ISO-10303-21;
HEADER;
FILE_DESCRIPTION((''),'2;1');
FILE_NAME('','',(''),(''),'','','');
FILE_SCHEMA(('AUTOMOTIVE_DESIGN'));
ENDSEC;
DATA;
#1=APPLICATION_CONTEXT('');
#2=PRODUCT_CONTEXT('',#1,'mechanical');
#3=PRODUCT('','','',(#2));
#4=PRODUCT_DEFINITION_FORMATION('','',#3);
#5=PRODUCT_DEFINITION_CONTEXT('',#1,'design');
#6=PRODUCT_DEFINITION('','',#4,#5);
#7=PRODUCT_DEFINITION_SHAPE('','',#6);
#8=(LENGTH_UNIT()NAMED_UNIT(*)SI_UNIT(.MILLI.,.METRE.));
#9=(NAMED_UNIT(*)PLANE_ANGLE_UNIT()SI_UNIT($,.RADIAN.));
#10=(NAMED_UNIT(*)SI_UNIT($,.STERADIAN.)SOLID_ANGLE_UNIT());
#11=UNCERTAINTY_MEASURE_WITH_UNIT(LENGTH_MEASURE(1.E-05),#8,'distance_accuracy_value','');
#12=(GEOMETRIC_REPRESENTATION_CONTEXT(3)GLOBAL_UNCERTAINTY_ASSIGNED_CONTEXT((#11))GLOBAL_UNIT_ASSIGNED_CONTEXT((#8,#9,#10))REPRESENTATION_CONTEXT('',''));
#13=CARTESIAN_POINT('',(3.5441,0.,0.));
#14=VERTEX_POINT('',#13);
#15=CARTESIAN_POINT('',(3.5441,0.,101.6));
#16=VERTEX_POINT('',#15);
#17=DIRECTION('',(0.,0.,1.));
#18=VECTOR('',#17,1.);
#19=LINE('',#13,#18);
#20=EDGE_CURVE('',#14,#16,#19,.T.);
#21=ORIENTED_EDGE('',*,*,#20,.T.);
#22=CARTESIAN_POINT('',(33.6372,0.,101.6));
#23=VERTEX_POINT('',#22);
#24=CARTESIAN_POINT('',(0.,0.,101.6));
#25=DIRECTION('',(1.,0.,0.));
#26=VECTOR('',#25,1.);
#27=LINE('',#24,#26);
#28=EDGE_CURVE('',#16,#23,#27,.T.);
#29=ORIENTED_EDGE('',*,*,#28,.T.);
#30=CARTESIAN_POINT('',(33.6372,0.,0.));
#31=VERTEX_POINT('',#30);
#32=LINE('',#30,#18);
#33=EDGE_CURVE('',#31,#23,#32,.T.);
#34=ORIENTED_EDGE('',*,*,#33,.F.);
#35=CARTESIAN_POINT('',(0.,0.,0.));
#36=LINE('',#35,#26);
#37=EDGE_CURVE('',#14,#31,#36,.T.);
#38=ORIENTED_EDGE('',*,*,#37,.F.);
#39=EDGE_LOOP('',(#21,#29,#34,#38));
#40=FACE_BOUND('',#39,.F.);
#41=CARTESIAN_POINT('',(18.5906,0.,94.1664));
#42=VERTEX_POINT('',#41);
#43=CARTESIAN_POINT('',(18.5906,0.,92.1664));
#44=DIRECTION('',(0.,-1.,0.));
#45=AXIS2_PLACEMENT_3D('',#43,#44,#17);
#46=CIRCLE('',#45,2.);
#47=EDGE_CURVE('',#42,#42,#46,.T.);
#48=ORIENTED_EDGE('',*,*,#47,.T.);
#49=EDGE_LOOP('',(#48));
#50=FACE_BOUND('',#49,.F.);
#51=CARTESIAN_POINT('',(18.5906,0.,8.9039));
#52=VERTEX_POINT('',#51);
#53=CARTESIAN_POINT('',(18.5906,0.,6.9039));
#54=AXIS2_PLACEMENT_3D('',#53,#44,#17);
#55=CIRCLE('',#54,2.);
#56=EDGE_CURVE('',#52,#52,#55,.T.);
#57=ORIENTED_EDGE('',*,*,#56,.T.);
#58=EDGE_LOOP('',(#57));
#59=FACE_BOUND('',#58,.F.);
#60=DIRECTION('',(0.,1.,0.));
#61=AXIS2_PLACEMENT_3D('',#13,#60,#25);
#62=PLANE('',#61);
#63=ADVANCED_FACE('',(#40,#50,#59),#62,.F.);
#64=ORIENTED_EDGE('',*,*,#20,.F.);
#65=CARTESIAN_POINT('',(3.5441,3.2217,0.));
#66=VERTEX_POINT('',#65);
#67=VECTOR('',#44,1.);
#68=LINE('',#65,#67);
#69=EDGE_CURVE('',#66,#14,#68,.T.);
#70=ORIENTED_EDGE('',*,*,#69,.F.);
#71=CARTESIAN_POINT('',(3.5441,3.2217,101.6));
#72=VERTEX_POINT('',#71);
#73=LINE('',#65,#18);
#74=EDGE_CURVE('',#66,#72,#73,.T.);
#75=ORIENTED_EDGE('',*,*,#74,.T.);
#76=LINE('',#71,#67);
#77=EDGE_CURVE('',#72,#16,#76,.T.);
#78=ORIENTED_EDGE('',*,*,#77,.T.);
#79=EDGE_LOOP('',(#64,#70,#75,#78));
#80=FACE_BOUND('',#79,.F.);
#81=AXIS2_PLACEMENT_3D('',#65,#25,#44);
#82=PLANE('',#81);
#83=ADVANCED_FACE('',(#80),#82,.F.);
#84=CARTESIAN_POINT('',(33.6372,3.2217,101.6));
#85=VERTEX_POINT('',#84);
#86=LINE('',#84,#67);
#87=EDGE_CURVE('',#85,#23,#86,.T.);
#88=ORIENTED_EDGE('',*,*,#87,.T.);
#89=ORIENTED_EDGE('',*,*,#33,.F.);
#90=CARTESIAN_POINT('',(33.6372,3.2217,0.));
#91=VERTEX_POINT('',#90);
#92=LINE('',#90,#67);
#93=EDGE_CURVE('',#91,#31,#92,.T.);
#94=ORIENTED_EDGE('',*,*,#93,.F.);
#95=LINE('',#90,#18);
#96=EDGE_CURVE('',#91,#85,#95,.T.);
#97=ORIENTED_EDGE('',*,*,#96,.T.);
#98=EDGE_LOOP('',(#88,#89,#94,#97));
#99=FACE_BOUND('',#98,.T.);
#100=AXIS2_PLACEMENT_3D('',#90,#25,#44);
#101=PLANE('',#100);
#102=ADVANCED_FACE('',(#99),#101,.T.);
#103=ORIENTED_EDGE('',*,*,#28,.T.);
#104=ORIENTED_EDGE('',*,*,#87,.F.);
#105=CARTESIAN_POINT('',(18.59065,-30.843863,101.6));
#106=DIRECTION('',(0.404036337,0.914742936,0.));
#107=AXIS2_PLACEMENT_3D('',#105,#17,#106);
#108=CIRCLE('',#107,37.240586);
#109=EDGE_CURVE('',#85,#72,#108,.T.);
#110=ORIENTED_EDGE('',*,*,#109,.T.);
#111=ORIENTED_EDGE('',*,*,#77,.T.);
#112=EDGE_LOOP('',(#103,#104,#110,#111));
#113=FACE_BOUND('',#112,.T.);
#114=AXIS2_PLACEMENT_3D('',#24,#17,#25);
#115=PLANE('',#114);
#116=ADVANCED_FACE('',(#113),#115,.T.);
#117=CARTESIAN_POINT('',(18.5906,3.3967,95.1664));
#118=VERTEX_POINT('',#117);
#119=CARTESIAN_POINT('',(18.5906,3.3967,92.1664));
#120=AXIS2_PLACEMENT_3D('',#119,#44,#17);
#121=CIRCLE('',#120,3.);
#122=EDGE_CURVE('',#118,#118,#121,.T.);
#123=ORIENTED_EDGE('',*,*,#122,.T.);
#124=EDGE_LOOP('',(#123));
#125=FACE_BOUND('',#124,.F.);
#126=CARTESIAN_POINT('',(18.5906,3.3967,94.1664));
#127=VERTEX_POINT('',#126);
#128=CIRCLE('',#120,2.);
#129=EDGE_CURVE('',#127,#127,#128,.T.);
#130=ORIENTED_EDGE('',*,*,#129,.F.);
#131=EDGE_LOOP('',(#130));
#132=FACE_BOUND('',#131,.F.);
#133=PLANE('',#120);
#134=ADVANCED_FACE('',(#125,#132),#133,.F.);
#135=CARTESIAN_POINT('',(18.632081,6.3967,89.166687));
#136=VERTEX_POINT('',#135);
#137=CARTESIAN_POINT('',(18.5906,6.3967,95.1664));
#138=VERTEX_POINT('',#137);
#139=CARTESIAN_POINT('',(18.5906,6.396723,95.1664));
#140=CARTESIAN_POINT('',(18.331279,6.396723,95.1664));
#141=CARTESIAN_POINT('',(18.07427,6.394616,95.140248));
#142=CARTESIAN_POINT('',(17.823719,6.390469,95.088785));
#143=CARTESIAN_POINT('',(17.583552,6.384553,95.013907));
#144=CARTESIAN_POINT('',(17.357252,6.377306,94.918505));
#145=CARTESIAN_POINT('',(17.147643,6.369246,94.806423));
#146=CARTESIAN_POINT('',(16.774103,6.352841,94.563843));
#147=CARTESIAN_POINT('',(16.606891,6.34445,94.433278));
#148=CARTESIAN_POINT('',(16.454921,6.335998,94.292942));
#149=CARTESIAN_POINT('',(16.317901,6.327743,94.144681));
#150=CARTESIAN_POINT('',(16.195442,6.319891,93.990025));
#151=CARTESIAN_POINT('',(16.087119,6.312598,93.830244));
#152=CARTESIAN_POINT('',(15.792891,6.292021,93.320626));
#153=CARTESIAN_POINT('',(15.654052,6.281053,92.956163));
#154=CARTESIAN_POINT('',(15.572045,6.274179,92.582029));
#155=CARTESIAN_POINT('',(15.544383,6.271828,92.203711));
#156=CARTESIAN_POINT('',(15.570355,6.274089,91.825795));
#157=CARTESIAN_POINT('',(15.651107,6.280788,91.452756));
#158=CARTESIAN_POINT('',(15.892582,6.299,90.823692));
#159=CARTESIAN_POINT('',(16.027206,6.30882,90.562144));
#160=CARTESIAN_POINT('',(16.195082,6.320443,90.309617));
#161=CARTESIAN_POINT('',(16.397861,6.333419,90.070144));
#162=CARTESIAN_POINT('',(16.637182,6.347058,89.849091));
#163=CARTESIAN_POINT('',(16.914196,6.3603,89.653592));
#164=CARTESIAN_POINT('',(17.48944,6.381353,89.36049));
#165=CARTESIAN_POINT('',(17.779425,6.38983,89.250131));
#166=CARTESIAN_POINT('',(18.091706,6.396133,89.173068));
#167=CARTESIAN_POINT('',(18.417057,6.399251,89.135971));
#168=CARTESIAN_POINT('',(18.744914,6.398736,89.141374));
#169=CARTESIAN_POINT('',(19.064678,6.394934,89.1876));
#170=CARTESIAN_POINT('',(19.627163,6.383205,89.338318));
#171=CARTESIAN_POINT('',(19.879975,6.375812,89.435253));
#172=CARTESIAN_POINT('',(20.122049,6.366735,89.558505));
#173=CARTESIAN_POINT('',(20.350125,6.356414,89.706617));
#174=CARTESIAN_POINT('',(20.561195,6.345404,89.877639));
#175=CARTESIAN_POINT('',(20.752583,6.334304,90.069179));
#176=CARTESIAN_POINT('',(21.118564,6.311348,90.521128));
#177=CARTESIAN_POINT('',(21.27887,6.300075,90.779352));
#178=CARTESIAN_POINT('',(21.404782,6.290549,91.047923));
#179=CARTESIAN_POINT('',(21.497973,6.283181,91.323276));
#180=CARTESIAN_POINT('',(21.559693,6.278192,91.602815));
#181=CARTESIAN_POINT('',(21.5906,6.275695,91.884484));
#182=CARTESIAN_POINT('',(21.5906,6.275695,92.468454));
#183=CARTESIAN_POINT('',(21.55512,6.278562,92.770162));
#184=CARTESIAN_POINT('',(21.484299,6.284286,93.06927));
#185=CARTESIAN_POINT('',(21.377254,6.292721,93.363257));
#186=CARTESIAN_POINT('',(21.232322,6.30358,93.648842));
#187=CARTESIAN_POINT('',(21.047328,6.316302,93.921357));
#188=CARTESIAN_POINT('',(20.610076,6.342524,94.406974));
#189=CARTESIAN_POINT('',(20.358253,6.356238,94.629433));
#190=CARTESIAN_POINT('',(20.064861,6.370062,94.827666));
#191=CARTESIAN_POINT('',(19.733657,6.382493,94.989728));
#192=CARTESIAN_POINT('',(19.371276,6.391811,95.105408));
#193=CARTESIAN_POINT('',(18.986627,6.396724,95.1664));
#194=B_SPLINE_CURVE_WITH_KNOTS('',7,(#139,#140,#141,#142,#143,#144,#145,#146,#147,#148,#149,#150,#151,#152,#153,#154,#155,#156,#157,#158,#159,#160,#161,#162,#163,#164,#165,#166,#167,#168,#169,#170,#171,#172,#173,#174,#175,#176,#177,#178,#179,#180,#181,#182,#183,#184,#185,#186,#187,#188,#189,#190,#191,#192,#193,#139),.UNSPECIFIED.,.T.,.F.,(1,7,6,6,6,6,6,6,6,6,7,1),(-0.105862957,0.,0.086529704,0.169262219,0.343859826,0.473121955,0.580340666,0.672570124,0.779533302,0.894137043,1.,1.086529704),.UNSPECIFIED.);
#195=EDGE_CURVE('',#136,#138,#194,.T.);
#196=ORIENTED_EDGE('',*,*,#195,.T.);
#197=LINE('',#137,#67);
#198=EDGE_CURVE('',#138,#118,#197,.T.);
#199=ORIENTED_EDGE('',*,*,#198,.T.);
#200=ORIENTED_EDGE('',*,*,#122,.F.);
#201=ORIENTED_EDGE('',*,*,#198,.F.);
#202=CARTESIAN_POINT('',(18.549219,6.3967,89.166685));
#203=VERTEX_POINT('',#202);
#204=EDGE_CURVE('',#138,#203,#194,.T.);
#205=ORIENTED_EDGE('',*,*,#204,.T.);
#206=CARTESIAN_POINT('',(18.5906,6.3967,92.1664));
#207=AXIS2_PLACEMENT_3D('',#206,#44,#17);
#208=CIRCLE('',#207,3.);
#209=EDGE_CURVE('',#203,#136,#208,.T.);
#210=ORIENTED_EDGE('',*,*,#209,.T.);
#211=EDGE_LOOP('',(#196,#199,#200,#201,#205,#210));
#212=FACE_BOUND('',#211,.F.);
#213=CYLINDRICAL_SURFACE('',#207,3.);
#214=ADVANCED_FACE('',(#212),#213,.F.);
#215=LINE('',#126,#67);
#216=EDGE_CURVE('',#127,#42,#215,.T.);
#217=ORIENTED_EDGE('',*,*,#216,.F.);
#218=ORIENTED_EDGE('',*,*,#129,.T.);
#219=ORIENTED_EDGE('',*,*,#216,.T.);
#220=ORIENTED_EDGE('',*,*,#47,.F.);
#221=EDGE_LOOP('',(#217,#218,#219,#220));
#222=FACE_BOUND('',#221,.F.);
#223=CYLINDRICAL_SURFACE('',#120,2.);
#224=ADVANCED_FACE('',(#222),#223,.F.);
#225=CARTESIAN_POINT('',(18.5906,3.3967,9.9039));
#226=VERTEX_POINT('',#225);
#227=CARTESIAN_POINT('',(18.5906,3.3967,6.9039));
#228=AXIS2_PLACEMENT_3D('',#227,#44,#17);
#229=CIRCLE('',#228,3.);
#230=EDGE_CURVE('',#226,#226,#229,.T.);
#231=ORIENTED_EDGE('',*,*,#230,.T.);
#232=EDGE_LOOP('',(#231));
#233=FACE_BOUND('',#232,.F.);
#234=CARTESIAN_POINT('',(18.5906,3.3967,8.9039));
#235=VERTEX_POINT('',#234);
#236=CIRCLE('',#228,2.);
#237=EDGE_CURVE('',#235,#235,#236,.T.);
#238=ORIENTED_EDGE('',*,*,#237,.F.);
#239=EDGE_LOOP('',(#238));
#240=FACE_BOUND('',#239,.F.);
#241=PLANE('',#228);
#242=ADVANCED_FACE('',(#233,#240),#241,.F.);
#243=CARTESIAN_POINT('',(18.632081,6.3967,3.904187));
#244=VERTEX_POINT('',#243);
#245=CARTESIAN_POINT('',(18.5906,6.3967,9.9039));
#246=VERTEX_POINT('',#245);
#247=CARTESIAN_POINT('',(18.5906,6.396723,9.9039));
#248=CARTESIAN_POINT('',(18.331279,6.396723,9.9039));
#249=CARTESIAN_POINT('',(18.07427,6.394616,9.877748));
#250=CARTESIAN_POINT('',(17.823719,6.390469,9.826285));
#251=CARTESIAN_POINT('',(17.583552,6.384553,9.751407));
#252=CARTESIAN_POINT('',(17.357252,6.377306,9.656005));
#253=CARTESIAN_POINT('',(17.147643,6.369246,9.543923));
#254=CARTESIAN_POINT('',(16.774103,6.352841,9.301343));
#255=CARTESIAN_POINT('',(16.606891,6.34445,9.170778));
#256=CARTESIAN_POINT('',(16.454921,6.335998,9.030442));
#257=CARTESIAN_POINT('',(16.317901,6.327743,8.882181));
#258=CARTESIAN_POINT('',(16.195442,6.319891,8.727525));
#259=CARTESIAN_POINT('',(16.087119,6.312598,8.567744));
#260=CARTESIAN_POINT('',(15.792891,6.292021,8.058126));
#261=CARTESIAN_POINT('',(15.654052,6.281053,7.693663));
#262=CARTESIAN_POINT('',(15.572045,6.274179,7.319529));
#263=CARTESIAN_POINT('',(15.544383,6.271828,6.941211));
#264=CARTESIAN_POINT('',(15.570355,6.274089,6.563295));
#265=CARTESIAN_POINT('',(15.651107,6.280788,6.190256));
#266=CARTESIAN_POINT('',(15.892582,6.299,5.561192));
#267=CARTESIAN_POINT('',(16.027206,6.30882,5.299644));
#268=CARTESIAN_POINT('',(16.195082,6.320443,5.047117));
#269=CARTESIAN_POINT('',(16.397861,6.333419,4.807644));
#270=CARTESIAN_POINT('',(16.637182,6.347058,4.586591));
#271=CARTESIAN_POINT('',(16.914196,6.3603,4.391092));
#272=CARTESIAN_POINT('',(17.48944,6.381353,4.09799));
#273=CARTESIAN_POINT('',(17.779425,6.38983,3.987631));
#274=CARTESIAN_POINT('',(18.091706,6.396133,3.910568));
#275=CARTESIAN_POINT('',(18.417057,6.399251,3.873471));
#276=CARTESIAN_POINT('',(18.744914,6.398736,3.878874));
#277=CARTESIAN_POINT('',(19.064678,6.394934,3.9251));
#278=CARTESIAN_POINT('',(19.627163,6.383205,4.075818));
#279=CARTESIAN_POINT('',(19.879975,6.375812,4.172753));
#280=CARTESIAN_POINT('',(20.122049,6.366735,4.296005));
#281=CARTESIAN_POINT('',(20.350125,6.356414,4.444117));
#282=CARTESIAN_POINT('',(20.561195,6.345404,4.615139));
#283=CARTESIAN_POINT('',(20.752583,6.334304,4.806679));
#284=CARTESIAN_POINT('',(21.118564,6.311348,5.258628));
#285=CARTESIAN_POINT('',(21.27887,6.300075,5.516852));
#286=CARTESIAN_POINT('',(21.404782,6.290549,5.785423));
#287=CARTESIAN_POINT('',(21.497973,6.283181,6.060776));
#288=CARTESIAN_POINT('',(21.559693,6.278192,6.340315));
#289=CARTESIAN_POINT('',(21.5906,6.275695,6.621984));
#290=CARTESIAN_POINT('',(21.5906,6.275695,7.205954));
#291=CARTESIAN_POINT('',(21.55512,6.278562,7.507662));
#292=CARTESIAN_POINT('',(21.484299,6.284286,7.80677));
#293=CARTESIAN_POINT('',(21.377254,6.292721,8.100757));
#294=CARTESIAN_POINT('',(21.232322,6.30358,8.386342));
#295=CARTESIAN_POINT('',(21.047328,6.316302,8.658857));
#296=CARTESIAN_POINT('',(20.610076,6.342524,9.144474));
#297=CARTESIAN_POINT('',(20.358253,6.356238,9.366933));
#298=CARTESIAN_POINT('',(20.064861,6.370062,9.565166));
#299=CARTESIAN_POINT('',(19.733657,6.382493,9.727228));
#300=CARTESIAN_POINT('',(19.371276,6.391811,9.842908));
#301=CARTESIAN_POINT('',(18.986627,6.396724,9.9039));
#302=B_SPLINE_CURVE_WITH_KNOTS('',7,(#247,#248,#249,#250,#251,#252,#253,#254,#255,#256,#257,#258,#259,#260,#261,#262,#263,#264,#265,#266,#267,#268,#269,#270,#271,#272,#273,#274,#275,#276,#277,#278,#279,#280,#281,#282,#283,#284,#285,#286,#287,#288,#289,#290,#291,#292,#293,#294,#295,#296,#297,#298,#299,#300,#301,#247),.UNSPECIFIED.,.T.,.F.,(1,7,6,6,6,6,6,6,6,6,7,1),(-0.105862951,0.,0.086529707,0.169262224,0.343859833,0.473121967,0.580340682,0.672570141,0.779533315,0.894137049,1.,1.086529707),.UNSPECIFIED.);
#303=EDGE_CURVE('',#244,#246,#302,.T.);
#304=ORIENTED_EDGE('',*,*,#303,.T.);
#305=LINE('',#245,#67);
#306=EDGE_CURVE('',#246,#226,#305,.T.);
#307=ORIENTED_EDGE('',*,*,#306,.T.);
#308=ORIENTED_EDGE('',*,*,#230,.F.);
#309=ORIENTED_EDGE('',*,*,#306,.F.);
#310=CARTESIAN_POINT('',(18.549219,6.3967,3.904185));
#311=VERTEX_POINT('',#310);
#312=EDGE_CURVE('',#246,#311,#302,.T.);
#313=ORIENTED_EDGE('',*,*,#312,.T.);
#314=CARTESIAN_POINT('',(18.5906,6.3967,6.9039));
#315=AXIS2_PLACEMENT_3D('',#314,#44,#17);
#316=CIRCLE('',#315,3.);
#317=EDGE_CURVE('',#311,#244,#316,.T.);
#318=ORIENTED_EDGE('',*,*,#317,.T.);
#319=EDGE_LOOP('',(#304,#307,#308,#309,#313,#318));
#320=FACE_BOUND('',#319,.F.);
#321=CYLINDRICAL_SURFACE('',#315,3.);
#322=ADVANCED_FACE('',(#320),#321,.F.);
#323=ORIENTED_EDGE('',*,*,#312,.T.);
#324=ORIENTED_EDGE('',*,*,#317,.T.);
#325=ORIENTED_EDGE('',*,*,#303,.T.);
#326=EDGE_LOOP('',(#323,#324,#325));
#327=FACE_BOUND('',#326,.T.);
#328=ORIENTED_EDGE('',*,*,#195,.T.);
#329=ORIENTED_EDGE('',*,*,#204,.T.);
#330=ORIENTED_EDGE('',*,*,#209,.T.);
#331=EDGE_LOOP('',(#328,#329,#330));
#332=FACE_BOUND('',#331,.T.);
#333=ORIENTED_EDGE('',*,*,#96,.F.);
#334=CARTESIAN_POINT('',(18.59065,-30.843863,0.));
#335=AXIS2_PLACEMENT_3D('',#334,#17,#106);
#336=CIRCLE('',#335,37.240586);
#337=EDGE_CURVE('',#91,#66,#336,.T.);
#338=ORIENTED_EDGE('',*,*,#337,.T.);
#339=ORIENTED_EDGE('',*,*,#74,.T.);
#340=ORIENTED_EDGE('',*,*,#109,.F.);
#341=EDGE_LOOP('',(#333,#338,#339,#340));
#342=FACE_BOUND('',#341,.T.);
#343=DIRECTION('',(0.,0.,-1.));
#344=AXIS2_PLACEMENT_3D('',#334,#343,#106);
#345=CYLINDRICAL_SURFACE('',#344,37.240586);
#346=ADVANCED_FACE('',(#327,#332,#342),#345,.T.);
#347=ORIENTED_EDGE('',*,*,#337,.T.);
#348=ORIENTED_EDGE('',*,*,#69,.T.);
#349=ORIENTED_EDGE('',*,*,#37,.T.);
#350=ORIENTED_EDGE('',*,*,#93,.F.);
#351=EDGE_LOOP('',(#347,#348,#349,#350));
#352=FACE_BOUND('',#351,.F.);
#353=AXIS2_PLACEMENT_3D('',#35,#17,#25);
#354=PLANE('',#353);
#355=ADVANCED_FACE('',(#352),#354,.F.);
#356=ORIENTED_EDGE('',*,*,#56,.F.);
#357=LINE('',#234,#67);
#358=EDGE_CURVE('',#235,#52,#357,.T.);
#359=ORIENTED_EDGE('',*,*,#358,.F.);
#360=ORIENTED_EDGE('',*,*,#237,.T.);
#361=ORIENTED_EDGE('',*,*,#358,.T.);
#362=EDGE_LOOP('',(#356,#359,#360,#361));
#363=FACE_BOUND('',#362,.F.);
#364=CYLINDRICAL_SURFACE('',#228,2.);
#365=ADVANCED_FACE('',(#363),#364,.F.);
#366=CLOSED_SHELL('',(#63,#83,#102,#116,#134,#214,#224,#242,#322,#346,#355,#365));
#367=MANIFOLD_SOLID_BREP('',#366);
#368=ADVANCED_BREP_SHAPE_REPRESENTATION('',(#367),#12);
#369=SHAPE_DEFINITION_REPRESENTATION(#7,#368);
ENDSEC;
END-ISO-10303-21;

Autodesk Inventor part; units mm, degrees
ref_plane "YZ Plane" through (0, 0, 0) normal (1, 0, 0) x (0, 1, 0)
ref_plane "XZ Plane" through (0, 0, 0) normal (0, 1, 0) x (-1, 0, 0)
ref_plane "XY Plane" through (0, 0, 0) normal (0, 0, 1) x (1, 0, 0)
sketch "Sketch1" plane through (0, 0, 0) normal (0, 0, 1) x (1, 0, 0)
  line L0 (0, 0) -> (38.1, 0)
  arc A0 (33.6372, 3.2217) -> (3.5441, 3.2217) centre (18.5906, -30.8441) ccw
  line L1 (-11.7643, 6.3967) -> (19.5622, 6.3967) construction
  line L2 (-11.7643, 6.3967) -> (-11.7643, 0.0467) construction
  line L3 (3.5441, 3.2217) -> (3.5441, 0)
  line L4 (33.6372, 3.2217) -> (33.6372, 0)
  line L5 (3.5441, 0) -> (33.6372, 0)
  dimension "d0" = 38.1
  dimension "d1" = 6.35
extrude "Extrusion1" add sketch "Sketch1" along normal blind 101.6
ref_plane "Work Plane1" through (18.5906, 6.3967, 0) normal (0, -1, 0) x (1, 0, 0)
sketch "Sketch5" plane through (18.5906, 6.3967, 0) normal (0, -1, 0) x (1, 0, 0)
  point P0 (-18.5906, 0)
  point P1 (0, 6.9039)
  point P2 (0, 92.1664)
hole "Hole2" at (18.5906, 6.3967, 6.9039) at (18.5906, 6.3967, 92.1664) direction (0, -1, 0) diameter 4 end through all counterbore diameter 6 counterbore depth 3
properties part number "Beacon Push Bar"
